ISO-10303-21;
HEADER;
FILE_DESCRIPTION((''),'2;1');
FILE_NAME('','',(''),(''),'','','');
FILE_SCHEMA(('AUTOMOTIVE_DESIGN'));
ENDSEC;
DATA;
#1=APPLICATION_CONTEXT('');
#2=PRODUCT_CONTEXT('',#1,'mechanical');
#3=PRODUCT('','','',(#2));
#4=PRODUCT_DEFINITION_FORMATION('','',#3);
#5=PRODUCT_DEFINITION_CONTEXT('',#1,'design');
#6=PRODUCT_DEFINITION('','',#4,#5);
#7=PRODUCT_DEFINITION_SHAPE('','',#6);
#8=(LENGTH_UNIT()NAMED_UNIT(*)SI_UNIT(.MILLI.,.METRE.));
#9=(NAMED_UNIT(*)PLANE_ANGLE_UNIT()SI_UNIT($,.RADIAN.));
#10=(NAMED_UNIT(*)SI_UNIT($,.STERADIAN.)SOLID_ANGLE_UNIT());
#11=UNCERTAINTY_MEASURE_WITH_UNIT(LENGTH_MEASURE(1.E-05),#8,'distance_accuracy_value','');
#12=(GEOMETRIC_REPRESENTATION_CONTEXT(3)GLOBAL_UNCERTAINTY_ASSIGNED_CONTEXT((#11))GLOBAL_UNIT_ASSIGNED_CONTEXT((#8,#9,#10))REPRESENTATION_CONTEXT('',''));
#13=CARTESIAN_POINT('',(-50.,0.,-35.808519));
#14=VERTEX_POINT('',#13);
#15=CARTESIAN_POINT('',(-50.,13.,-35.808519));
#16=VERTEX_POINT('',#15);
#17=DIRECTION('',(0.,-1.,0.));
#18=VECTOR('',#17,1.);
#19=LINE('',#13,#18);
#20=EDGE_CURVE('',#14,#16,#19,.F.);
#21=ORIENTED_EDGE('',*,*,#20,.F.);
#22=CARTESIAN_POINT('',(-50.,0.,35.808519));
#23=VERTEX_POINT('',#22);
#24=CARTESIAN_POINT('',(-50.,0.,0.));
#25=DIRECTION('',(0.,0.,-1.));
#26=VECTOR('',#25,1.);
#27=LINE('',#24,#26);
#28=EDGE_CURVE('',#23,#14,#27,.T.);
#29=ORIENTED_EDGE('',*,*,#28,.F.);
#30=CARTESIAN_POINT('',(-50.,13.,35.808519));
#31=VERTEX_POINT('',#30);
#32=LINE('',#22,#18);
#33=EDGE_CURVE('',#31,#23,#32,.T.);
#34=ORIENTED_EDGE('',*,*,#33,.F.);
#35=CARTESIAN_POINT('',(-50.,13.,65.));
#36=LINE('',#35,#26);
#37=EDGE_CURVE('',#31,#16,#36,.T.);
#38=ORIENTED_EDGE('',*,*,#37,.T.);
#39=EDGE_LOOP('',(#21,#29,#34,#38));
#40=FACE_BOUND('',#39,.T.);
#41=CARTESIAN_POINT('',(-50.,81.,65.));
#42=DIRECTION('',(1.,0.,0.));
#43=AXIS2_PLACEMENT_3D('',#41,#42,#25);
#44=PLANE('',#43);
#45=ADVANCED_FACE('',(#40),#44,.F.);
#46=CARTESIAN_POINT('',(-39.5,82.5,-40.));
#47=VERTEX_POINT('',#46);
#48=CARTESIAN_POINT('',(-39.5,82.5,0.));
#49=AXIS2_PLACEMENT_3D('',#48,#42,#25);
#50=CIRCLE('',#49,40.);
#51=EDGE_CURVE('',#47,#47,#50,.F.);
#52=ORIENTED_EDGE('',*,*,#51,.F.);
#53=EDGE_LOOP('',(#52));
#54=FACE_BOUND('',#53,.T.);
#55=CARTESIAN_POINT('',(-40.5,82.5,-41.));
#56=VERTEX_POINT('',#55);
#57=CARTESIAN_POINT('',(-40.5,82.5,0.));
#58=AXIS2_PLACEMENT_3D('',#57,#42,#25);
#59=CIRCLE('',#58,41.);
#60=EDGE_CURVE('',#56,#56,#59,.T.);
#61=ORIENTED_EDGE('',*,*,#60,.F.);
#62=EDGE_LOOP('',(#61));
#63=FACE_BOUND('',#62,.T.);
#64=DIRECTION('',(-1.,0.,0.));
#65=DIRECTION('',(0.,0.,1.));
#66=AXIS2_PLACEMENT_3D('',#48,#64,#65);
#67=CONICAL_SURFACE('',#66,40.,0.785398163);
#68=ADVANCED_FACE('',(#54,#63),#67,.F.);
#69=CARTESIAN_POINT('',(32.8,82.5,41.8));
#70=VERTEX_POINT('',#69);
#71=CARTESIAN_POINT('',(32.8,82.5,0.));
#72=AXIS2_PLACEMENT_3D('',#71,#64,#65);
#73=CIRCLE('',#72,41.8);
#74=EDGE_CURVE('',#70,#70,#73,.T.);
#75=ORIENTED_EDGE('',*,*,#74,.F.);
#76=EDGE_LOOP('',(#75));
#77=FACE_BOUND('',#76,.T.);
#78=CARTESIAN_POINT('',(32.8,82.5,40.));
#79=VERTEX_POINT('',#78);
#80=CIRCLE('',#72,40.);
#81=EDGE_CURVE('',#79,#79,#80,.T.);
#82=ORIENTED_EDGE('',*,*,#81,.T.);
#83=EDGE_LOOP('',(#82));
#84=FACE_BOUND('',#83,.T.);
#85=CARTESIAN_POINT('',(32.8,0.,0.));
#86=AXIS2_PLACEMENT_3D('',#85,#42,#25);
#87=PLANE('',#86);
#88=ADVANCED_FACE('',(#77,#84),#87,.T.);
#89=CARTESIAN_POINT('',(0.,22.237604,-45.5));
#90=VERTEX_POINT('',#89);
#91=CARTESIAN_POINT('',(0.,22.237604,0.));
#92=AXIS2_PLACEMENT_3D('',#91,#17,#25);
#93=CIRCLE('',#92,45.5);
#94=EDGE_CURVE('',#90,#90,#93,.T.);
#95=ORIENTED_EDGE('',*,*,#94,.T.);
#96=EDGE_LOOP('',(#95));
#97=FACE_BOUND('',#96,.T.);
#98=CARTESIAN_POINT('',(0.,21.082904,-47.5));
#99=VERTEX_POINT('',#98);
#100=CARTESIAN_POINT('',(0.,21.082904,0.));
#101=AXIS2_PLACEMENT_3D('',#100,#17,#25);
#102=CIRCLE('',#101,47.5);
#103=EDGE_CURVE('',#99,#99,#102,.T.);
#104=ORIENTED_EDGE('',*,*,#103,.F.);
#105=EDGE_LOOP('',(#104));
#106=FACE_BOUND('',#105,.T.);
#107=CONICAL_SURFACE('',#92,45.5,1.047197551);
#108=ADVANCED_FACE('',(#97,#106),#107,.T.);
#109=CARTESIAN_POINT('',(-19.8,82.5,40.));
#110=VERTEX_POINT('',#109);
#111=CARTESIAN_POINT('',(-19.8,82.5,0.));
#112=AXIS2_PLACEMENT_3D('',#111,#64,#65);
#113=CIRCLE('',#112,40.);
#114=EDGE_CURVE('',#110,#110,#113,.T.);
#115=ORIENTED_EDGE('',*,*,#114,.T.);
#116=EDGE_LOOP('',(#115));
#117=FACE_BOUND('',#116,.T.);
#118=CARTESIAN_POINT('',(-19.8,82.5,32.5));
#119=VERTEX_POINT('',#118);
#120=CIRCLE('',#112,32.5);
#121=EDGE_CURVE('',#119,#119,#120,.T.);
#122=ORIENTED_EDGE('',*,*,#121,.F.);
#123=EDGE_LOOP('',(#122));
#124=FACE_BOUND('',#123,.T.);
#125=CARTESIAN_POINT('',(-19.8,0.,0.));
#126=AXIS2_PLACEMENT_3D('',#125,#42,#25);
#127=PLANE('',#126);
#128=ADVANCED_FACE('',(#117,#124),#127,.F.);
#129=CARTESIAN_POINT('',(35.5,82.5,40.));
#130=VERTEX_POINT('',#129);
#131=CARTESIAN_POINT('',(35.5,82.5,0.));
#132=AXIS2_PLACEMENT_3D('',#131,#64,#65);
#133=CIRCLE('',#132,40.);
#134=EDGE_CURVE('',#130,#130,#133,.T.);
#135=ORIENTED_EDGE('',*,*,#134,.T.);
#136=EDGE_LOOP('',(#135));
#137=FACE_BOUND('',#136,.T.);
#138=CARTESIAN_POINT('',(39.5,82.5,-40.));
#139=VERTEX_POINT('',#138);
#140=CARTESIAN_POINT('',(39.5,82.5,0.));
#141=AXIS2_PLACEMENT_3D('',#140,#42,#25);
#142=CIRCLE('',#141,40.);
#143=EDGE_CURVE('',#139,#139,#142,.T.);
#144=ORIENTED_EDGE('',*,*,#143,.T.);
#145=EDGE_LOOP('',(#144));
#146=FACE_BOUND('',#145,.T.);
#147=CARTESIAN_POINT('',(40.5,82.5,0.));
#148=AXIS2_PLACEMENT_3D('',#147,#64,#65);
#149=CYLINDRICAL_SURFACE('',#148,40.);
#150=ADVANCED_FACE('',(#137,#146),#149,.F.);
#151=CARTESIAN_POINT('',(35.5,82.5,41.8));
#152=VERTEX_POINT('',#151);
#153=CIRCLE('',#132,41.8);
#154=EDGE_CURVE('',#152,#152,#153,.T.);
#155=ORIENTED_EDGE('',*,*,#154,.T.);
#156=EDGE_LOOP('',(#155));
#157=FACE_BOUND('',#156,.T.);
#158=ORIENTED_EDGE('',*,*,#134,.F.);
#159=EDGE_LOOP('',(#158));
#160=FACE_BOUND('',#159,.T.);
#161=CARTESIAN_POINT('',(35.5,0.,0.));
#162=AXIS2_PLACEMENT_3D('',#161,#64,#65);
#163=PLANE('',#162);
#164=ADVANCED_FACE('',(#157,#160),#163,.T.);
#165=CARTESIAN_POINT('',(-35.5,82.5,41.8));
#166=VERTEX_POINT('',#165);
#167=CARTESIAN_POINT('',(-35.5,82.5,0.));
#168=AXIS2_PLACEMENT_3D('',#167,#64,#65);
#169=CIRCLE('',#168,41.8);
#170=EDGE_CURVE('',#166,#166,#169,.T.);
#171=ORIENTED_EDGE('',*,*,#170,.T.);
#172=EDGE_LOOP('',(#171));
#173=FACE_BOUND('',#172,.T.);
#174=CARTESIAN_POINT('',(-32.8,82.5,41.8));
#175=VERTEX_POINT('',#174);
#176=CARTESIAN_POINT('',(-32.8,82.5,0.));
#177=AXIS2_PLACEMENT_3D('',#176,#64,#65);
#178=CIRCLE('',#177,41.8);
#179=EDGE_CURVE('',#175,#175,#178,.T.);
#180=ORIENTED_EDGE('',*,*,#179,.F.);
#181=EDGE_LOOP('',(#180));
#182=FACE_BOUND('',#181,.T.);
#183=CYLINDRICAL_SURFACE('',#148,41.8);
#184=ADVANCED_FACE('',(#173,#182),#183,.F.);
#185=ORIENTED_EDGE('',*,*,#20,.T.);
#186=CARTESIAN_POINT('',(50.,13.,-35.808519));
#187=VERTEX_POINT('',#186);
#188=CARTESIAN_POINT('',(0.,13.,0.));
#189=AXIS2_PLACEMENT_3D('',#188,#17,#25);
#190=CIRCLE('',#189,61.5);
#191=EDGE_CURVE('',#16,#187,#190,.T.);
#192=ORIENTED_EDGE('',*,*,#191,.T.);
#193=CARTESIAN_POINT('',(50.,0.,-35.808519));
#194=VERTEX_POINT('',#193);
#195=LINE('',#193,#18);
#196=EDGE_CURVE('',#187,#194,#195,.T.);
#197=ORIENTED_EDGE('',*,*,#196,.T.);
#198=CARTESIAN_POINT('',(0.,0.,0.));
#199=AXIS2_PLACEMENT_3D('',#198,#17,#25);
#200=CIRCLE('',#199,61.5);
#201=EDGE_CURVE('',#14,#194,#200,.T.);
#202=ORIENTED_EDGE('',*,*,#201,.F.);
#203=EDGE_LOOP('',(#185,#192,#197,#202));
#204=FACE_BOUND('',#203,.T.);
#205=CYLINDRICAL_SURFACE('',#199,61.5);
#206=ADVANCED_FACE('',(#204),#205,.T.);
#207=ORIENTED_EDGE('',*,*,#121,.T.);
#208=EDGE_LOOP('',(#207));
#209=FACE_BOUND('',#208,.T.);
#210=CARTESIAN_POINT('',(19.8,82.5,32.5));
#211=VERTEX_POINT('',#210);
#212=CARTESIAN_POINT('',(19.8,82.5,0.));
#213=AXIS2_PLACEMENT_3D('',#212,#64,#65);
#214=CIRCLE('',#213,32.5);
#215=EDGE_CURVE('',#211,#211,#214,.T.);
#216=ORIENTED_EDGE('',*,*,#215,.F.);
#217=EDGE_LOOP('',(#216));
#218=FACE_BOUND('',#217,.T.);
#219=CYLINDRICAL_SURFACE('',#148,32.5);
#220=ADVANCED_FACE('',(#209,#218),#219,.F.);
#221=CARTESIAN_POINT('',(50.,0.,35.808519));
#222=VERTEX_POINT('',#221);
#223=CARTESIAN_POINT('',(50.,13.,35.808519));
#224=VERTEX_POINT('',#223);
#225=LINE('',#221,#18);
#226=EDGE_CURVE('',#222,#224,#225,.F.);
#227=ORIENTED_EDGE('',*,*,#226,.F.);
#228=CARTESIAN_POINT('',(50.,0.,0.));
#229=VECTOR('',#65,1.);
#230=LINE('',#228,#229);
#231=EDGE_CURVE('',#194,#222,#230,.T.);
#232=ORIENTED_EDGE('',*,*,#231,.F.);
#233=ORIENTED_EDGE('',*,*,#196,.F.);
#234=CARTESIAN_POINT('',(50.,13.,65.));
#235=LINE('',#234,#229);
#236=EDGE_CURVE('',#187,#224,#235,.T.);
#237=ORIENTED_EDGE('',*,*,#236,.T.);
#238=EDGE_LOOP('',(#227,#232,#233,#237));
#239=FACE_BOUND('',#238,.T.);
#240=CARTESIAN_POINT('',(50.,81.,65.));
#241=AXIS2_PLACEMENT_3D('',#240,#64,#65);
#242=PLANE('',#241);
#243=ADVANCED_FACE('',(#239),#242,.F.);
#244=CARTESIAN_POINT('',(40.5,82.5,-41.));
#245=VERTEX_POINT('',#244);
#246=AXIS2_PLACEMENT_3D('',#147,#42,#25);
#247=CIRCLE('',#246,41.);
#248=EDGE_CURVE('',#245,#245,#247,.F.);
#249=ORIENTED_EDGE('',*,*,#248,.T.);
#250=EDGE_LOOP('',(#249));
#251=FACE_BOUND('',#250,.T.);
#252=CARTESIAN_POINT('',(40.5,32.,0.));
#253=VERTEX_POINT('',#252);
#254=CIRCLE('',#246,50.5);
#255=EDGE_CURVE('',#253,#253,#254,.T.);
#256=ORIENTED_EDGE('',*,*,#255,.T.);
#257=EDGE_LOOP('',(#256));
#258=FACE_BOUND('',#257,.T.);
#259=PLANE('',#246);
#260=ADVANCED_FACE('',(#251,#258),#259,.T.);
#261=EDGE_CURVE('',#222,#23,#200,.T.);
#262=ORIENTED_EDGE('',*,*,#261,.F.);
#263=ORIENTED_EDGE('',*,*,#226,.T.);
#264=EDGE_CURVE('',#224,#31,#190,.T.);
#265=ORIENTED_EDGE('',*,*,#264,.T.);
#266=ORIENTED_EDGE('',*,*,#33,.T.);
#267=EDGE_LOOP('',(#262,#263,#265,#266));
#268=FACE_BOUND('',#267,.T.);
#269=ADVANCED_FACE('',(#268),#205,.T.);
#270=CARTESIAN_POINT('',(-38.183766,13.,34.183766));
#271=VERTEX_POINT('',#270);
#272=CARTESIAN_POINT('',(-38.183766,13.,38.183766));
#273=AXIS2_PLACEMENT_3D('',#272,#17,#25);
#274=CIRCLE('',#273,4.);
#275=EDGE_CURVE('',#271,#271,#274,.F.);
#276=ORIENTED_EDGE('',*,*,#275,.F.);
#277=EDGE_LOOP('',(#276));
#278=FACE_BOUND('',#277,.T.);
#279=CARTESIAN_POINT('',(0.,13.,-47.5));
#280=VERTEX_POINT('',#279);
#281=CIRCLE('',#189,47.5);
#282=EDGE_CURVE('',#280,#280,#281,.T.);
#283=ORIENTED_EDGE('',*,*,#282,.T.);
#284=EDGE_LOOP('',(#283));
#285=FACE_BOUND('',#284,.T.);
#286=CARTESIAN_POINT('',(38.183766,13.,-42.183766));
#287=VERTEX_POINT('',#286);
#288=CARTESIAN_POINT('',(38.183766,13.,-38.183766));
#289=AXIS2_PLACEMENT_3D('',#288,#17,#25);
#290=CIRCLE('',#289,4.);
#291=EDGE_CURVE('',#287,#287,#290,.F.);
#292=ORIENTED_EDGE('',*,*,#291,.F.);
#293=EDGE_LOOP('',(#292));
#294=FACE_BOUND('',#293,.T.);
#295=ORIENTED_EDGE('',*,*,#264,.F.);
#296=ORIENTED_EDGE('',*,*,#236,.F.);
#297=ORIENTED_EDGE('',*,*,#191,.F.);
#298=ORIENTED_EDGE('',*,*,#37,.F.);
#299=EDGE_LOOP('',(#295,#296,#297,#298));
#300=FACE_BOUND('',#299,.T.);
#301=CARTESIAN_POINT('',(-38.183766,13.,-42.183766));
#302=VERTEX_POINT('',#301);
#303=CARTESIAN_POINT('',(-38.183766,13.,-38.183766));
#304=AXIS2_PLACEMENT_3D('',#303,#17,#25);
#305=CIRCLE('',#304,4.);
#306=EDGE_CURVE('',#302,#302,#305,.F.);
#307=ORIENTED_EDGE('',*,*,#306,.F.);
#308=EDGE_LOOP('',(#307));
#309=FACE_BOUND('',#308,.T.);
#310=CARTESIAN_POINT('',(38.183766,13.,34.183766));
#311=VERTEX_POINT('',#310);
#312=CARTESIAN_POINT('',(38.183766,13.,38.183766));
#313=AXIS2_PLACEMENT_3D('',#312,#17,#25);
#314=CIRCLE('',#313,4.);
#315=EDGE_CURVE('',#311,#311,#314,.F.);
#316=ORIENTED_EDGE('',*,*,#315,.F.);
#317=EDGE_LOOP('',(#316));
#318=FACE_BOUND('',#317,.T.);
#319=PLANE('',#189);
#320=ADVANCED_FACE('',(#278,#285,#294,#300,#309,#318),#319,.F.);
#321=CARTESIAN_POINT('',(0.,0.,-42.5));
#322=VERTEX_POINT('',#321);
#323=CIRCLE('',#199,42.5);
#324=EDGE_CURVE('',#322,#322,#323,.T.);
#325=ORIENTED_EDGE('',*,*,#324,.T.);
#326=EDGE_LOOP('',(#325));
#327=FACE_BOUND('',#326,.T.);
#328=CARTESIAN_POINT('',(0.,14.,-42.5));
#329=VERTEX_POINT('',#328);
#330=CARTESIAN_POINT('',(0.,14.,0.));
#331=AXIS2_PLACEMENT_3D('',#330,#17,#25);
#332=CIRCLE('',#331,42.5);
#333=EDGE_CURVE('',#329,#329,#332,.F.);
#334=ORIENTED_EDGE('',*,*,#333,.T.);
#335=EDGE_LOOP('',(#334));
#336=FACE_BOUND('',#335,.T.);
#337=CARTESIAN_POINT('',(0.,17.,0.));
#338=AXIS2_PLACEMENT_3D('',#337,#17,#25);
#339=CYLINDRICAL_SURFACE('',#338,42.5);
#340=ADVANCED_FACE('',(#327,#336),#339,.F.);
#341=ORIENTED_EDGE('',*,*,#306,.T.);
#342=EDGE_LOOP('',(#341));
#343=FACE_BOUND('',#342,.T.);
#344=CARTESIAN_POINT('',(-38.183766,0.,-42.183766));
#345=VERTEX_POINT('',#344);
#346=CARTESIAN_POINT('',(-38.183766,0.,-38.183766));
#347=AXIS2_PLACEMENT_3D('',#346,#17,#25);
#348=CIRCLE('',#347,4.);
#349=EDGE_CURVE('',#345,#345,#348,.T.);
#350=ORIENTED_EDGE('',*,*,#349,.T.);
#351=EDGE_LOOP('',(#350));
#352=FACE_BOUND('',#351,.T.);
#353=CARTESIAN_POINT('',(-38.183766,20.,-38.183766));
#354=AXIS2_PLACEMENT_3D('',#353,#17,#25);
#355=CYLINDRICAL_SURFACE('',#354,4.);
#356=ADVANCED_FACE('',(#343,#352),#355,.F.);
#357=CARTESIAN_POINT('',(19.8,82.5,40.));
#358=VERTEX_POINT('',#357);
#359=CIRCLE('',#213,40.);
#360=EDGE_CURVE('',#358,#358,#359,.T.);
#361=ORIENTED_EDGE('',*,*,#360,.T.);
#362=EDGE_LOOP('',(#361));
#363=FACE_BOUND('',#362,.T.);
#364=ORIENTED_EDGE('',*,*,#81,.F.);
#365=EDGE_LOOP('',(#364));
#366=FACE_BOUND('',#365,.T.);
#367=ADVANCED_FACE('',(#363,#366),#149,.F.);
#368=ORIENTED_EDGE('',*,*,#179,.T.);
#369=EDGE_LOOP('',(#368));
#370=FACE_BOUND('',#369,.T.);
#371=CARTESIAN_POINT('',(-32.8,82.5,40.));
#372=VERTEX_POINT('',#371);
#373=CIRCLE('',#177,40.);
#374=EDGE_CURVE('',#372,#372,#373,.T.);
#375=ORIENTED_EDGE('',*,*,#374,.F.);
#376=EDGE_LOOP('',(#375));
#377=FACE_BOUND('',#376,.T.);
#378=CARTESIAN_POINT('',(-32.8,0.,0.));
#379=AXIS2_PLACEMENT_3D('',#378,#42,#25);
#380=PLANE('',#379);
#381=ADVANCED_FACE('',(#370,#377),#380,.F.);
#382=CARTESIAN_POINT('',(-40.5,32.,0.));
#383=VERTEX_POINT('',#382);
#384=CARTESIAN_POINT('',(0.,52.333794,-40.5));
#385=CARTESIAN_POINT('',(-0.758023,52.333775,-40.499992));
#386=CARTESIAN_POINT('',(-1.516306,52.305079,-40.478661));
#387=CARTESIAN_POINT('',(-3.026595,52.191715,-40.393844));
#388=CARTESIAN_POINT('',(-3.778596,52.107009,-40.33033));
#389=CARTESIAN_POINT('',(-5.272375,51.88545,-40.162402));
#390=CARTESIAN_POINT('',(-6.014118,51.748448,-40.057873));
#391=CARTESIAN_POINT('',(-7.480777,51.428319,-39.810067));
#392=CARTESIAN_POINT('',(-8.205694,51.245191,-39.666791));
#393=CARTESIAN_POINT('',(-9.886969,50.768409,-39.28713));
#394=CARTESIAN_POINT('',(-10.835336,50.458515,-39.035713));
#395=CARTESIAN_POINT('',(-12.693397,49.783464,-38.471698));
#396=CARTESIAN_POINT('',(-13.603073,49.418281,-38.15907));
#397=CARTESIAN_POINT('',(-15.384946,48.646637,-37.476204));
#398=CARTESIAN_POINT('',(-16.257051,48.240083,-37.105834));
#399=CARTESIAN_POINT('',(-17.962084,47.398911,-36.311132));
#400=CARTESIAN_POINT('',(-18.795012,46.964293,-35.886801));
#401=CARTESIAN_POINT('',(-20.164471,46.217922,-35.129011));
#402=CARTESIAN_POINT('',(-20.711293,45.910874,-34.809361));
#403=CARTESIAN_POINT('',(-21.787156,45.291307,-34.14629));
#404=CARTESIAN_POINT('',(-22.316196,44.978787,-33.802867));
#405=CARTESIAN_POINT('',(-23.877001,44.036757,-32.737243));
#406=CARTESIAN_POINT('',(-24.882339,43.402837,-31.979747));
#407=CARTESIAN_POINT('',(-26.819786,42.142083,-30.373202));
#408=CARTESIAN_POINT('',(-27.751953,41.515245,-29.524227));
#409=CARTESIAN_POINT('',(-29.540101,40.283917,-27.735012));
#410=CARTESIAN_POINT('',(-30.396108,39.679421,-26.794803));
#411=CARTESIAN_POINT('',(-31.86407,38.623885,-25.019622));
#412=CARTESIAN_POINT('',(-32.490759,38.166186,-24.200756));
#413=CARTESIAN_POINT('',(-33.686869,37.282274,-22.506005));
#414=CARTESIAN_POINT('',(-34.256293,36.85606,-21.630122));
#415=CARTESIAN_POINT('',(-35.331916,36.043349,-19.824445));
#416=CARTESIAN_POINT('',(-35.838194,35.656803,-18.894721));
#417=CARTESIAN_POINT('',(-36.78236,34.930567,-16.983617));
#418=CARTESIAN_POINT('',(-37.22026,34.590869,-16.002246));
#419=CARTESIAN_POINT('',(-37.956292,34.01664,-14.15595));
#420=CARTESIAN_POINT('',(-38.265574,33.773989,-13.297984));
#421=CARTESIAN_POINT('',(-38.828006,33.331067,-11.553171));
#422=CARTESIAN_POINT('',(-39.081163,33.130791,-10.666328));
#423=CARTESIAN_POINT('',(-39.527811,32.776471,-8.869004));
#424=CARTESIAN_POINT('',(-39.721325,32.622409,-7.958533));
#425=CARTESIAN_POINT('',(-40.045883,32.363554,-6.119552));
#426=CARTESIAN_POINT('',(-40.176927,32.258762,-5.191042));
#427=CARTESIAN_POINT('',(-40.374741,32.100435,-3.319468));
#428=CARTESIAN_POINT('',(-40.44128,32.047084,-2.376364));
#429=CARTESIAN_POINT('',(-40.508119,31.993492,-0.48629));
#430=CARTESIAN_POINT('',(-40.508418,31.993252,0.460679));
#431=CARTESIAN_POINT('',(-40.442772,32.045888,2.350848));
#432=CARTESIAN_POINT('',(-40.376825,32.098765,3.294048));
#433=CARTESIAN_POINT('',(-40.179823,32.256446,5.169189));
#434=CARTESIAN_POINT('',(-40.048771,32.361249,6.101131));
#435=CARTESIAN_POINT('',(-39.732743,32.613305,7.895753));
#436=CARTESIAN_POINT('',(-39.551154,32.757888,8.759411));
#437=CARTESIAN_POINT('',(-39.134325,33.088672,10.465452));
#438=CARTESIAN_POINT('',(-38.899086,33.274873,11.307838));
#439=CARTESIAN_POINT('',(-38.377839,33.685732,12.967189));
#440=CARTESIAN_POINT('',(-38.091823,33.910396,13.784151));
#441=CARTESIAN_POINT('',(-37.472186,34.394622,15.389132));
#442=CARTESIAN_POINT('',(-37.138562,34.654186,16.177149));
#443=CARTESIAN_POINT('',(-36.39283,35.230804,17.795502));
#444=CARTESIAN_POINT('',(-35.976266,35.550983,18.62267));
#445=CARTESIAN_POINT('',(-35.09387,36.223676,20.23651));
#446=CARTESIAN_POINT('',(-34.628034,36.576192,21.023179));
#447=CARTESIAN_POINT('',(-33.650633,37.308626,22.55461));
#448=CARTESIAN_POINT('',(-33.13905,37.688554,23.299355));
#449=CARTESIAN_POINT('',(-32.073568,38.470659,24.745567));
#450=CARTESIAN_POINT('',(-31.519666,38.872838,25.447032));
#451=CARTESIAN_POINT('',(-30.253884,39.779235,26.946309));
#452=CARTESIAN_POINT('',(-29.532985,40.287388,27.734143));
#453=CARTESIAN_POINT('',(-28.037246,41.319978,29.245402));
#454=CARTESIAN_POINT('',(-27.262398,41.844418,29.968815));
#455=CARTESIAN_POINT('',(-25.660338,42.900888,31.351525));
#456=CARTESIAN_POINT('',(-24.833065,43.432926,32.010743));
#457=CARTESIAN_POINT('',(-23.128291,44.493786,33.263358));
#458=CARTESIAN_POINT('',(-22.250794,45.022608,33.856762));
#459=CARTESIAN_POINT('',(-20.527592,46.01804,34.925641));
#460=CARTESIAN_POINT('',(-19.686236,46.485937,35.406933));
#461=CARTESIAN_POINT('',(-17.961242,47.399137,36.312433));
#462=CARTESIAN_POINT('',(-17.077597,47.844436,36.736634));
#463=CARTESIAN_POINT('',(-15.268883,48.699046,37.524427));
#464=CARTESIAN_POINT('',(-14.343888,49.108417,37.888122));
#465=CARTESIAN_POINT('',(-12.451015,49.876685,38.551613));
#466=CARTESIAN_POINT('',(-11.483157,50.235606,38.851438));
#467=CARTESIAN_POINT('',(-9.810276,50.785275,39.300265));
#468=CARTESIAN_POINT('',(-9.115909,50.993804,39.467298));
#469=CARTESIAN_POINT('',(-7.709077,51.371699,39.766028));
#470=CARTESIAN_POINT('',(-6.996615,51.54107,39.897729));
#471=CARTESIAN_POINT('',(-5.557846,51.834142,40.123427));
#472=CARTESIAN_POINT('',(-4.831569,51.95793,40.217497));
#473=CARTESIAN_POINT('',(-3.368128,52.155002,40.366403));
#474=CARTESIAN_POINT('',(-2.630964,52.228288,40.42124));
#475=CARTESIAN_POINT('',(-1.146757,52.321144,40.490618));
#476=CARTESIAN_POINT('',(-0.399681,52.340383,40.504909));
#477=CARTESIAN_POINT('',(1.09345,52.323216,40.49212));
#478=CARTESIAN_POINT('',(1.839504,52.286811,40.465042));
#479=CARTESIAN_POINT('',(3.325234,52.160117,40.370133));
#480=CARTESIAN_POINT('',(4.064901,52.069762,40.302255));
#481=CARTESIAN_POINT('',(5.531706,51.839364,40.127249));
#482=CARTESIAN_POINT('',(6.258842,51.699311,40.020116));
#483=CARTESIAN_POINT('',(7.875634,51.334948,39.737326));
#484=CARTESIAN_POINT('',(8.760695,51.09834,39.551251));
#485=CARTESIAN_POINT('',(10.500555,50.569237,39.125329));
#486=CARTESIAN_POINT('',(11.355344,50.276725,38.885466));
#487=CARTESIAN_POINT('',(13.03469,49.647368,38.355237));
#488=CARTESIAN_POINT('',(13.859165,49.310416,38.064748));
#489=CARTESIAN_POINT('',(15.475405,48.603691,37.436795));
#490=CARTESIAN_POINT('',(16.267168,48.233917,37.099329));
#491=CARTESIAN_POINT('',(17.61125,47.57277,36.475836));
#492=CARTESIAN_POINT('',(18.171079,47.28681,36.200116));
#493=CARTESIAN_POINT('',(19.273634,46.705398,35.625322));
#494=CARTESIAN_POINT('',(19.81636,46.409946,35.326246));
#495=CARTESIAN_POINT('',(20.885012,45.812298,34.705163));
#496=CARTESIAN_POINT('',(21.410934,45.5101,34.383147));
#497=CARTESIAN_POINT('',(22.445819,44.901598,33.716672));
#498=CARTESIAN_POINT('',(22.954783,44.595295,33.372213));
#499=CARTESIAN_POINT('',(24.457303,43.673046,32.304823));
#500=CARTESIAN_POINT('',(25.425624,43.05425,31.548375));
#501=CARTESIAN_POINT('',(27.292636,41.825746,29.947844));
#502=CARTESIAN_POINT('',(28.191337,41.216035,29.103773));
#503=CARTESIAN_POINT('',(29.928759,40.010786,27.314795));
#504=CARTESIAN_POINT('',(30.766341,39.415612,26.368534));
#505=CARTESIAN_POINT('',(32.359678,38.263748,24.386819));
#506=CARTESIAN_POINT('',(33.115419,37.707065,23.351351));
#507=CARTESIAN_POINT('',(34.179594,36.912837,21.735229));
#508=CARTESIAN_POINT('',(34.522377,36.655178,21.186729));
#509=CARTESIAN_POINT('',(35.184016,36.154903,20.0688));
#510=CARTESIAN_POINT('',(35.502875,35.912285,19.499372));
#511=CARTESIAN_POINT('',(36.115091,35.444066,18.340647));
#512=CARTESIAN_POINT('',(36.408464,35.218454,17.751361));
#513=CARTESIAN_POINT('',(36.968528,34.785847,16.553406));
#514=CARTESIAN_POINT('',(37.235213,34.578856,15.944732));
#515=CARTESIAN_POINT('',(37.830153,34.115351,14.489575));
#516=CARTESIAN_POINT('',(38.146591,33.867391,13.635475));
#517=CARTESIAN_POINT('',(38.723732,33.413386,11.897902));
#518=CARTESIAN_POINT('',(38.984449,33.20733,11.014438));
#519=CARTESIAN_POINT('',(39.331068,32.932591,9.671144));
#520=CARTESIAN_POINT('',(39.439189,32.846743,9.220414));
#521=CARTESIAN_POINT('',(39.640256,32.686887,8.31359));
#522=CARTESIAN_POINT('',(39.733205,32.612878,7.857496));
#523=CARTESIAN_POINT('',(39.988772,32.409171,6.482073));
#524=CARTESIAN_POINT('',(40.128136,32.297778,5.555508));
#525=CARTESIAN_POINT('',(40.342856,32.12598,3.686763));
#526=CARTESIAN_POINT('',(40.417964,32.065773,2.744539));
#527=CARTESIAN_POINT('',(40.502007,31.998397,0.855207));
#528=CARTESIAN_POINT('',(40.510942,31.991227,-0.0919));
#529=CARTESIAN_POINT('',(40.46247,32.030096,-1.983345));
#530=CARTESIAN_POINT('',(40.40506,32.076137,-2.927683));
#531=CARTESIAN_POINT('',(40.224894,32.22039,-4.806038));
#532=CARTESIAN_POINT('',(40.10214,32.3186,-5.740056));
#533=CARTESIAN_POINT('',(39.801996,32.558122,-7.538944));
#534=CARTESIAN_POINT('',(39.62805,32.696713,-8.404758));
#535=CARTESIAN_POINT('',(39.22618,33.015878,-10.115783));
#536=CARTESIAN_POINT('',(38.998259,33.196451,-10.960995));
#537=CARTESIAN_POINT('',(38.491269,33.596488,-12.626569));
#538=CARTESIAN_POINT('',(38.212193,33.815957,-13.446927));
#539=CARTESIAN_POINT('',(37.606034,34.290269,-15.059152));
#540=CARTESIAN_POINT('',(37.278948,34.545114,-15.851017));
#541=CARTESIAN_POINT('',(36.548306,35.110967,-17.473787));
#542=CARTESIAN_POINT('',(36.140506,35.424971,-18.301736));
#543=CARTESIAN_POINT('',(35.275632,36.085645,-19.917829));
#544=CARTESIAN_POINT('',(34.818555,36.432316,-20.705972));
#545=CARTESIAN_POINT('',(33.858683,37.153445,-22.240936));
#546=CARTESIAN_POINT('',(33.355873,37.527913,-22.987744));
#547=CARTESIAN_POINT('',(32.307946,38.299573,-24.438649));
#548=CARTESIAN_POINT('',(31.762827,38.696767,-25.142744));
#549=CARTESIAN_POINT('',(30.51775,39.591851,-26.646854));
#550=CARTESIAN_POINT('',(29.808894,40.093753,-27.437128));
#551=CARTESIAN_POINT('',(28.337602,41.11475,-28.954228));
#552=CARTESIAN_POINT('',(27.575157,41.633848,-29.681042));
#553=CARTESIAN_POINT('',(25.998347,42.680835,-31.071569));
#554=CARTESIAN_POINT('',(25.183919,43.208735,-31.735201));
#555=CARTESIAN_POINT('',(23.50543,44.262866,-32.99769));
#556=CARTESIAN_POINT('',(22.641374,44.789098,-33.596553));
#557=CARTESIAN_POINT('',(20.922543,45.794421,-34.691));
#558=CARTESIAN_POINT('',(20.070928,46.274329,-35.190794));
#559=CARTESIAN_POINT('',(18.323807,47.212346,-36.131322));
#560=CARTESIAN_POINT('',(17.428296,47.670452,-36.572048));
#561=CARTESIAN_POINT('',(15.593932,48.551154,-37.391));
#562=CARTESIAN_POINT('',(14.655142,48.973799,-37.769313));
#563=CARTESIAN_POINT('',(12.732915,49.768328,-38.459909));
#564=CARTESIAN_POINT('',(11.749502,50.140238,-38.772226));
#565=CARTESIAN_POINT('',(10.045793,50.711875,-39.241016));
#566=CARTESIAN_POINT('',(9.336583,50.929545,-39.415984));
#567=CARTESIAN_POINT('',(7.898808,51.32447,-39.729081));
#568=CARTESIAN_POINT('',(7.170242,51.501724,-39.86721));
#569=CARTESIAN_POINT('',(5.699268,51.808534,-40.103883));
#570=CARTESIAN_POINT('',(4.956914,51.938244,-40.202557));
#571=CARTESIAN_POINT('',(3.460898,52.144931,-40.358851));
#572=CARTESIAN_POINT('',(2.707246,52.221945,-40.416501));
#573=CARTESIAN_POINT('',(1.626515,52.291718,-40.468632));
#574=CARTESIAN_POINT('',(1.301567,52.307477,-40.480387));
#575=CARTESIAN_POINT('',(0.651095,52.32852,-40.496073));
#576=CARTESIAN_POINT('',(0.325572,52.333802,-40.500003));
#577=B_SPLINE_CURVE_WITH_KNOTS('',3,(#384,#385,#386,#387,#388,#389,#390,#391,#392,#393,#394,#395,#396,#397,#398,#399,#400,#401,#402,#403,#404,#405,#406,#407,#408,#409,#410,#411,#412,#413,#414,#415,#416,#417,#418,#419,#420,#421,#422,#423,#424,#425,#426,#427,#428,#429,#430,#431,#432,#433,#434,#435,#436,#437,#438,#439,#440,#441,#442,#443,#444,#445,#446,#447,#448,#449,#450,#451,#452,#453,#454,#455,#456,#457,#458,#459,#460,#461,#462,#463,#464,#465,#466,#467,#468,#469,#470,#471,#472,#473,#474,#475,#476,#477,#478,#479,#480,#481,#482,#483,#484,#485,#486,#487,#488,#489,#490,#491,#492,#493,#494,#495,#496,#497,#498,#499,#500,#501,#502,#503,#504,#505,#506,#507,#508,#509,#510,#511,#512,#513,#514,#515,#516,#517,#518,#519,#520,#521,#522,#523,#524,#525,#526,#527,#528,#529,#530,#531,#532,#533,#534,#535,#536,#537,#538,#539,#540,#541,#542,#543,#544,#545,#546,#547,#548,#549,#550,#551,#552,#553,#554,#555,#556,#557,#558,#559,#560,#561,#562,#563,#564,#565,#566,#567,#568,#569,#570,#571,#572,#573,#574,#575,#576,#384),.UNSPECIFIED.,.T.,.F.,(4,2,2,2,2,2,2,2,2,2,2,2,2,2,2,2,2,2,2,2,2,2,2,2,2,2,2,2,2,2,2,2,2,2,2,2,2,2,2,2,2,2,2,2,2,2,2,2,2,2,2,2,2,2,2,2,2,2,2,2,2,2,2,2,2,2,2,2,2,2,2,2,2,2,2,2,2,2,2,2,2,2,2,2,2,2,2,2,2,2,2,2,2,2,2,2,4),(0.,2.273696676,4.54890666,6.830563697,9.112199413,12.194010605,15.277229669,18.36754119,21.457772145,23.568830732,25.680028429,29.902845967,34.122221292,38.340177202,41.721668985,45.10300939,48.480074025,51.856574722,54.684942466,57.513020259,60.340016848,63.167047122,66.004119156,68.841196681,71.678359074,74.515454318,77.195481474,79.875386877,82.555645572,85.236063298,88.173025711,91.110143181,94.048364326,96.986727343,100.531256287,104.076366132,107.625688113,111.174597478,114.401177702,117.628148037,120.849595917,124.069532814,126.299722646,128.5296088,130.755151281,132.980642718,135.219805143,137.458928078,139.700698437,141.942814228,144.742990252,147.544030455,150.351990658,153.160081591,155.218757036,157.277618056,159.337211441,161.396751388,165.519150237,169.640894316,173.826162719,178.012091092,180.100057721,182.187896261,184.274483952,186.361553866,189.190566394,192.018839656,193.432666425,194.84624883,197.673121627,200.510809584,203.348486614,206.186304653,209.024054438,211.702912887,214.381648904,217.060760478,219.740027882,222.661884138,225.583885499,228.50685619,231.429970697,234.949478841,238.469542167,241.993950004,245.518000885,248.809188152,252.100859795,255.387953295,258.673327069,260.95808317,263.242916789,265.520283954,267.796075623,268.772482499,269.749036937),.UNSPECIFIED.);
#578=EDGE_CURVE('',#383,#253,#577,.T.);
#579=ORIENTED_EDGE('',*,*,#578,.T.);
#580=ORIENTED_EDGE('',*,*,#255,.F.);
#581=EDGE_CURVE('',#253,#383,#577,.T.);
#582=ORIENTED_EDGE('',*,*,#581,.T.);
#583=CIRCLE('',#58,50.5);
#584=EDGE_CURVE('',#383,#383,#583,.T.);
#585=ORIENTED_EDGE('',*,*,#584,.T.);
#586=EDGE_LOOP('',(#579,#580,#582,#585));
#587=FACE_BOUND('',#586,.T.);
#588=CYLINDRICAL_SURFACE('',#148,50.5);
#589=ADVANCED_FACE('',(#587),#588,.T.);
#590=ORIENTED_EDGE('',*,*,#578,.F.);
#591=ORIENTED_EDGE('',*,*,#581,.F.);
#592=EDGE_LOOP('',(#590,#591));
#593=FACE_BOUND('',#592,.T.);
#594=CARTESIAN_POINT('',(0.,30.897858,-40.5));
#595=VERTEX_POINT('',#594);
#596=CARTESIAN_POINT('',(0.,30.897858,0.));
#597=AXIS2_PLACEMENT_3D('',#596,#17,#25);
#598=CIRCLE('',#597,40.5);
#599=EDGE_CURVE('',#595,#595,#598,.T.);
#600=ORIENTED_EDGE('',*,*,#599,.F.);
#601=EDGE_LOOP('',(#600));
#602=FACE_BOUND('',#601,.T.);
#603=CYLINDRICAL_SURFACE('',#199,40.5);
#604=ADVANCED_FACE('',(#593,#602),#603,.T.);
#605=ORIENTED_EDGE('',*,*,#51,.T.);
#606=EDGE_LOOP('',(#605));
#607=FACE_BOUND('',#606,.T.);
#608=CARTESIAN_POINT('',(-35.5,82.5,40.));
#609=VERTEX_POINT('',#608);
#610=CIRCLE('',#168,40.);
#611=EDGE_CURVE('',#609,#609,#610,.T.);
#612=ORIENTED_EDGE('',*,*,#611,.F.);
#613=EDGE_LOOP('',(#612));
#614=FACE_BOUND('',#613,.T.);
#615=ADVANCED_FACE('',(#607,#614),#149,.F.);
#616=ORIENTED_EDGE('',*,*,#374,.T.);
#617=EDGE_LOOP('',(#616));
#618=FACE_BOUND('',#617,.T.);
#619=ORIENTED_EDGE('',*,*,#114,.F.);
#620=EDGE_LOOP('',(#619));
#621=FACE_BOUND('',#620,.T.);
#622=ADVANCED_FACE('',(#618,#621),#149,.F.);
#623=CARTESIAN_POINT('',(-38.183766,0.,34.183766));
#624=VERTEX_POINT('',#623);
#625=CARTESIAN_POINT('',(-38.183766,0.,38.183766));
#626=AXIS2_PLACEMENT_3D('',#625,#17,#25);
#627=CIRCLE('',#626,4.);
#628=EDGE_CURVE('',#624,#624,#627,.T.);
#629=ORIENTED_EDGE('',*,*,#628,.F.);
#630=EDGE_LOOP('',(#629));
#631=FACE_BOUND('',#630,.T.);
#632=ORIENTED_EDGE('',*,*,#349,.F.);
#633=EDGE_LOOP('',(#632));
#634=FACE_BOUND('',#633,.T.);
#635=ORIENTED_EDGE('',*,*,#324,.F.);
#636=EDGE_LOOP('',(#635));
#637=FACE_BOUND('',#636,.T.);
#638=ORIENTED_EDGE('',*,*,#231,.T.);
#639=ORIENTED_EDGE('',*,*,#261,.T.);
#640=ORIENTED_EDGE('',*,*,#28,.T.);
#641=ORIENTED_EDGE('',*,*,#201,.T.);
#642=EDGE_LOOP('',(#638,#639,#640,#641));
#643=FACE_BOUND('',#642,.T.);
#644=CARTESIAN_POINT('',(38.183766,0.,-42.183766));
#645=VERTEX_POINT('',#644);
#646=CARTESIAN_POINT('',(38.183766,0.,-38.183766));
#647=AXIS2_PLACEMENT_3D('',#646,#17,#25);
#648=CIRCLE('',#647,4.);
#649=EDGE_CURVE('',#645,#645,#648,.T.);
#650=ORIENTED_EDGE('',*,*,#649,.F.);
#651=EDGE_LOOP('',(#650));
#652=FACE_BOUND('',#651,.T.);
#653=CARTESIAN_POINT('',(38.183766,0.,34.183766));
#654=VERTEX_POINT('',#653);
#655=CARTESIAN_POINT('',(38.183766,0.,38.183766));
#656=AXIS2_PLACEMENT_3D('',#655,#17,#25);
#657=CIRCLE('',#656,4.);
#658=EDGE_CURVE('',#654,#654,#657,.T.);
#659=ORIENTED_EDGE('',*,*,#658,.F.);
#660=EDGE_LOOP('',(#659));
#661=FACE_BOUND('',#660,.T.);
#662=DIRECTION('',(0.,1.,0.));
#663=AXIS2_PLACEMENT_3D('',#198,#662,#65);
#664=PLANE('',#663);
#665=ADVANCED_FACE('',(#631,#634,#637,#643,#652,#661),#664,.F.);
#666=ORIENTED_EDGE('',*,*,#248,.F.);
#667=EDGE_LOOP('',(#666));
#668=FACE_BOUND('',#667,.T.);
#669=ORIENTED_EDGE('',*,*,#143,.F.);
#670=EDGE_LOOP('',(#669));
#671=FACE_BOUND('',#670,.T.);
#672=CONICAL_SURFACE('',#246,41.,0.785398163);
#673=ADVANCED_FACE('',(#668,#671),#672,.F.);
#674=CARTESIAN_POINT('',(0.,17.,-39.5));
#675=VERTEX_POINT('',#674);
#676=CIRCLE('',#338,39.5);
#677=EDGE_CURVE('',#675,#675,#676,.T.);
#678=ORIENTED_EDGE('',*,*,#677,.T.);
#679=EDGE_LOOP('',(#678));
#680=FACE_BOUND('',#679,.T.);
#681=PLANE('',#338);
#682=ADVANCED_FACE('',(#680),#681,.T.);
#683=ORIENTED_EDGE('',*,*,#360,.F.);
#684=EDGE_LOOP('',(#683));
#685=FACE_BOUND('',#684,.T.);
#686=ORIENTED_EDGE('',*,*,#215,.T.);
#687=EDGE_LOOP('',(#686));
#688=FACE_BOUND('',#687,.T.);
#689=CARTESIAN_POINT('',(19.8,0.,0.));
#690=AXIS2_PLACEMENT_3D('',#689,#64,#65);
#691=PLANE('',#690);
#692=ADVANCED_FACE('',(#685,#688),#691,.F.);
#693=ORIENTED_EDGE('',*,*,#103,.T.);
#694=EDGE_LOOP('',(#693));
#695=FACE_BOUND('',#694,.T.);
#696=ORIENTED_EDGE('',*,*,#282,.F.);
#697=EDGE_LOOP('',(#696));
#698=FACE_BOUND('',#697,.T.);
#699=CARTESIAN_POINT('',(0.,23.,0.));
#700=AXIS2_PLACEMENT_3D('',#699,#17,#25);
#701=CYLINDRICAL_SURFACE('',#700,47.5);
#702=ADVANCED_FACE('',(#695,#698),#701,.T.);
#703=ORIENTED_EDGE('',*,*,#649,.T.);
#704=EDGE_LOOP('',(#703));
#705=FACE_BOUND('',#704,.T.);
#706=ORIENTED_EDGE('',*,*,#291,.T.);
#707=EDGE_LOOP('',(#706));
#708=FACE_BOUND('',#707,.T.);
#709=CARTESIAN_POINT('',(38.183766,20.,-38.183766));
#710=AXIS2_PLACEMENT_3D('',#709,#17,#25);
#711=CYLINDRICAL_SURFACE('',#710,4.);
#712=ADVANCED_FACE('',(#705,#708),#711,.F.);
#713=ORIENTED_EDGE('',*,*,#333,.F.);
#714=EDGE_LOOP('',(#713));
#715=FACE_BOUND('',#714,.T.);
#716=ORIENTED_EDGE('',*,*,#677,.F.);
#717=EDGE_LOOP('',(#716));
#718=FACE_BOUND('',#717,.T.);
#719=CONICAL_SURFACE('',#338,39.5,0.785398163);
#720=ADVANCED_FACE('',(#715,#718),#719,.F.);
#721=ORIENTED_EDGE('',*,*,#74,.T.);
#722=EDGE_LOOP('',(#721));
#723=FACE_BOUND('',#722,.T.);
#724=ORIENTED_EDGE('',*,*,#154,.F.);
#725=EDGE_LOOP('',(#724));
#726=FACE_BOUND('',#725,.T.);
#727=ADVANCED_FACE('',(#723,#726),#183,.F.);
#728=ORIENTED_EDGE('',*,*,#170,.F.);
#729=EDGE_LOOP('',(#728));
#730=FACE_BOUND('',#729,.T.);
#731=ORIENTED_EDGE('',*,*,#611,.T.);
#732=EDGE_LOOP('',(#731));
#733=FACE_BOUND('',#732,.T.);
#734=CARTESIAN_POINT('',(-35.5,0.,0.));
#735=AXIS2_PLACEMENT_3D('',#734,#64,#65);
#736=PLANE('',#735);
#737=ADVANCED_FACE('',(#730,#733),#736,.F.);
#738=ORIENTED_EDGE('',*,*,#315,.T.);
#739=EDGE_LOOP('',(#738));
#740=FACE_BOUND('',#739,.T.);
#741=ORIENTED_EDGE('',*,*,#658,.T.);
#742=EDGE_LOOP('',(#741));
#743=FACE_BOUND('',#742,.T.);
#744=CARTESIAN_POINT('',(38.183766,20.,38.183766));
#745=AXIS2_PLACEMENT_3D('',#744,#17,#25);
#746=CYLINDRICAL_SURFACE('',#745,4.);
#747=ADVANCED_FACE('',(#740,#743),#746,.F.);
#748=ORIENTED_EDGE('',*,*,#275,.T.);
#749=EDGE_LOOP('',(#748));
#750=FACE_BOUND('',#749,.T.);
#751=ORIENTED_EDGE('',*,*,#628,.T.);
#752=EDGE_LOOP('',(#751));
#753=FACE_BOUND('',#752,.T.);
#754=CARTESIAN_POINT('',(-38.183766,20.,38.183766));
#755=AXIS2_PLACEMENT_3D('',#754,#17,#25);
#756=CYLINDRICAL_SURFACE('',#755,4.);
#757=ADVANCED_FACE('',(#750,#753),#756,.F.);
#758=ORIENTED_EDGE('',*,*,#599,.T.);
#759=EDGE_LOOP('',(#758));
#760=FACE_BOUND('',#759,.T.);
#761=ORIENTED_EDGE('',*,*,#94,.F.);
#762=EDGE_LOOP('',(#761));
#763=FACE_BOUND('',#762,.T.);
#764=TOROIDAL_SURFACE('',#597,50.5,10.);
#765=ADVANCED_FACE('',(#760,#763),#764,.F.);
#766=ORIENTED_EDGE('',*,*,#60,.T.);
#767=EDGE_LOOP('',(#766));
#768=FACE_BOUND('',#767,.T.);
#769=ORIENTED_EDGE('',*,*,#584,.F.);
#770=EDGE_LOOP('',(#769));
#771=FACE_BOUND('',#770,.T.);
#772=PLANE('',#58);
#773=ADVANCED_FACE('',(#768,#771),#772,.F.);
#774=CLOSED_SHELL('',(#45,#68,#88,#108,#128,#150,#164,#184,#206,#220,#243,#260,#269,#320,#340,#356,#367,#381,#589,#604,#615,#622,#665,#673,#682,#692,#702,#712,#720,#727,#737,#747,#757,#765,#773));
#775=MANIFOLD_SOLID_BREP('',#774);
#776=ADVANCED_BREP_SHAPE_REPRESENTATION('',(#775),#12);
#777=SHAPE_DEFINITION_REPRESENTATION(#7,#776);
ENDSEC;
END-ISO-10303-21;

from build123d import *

# Parameters (mm, degrees)
SKETCH3_R           = 50.5
BOSS_EXTRUDE1_DEPTH = 40.5
SKETCH5_W           = 20
SKETCH5_H           = 130
CUT_EXTRUDE1_DEPTH  = 81
SKETCH9_R           = 4
CUT_EXTRUDE4_DEPTH  = 20
SKETCH10_R          = 42.5
CUT_EXTRUDE5_DEPTH  = 17
CHAMFER1_SIZE       = 1
CHAMFER2_SIZE       = 3
CUT_EXTRUDE8_START  = -13
SKETCH13_OUTSIDE_W  = 143.386
SKETCH13_OUTSIDE_H  = 166.386
SKETCH13_OUTSIDE_R  = 47.5
CUT_EXTRUDE8_DEPTH  = 10


with BuildPart() as part:
    # Sketch1 → Revolve1 (revolve)
    with BuildSketch(Plane.XY, mode=Mode.PRIVATE) as revolve1_sk:
        with BuildLine():
            Line((0, 0), (-61.5, 0))
            Line((-61.5, 0), (-61.5, 13))
            Line((-61.5, 13), (-45.5, 22.237604307))
            ThreePointArc((-45.5, 22.237604307), (-41.839745962, 25.897858345), (-40.5, 30.897858345))
            Line((-40.5, 30.897858345), (-40.5, 80))
            Line((-40.5, 80), (0, 80))
            Line((0, 80), (0, 0))
        make_face()
    revolve(revolve1_sk.sketch.rotate(Axis((0, 0, 0), (0, 1, 0)), 270), axis=Axis((0, 0, 0), (0, 1, 0)))

    # Sketch3 → Boss-Extrude1 (add, symmetric)
    with BuildSketch(Plane(origin=(0, 0, 0), x_dir=(0, 0, -1), z_dir=(1, 0, 0))):
        with Locations((0, 82.5)):
            Circle(SKETCH3_R)
    extrude(amount=BOSS_EXTRUDE1_DEPTH, both=True)

    # Sketch5 → Cut-Extrude1 (cut)
    with BuildSketch(Plane.XZ):
        with Locations((60, 0)):
            Rectangle(SKETCH5_W, SKETCH5_H)
        with Locations((-60, 0)):
            Rectangle(SKETCH5_W, SKETCH5_H)
    extrude(amount=-CUT_EXTRUDE1_DEPTH, mode=Mode.SUBTRACT)

    # Sketch6 → Cut-Revolve1 (revolve, cut)
    with BuildSketch(Plane.XY, mode=Mode.PRIVATE) as cut_revolve1_sk:
        Polygon((-35.5, 122.5), (-40.5, 122.5), (-40.5, 82.5), (40.5, 82.5), (40.5, 122.5), (35.5, 122.5), (35.5, 124.3), (32.8, 124.3), (32.8, 122.5), (19.8, 122.5), (19.8, 115), (-19.8, 115), (-19.8, 122.5), (-32.8, 122.5), (-32.8, 124.3), (-35.5, 124.3), align=None)
    revolve(cut_revolve1_sk.sketch.rotate(Axis((40.5, 82.5, 0), (1, 0, 0)), 90), axis=Axis((40.5, 82.5, 0), (1, 0, 0)), mode=Mode.SUBTRACT)

    # Sketch9 → Cut-Extrude4 (cut)
    with BuildSketch(Plane.XZ):
        with Locations(Location((38.183766184, 38.183766184, 0), (0, 0, 270))):
            Circle(SKETCH9_R)
        with Locations(Location((-38.183766184, 38.183766184, 0), (0, 0, 270))):
            Circle(SKETCH9_R)
        with Locations(Location((-38.183766184, -38.183766184, 0), (0, 0, 270))):
            Circle(SKETCH9_R)
        with Locations(Location((38.183766184, -38.183766184, 0), (0, 0, 270))):
            Circle(SKETCH9_R)
    extrude(amount=-CUT_EXTRUDE4_DEPTH, mode=Mode.SUBTRACT)

    # Sketch10 → Cut-Extrude5 (cut)
    with BuildSketch(Plane.XZ):
        with Locations(Location((0, 0, 0), (0, 0, 270))):
            Circle(SKETCH10_R)
    extrude(amount=-CUT_EXTRUDE5_DEPTH, mode=Mode.SUBTRACT)

    # Chamfer1
    # the kernel refuses this chamfer: 1 mm, written as the material it takes off along each edge
    with BuildSketch(Plane(origin=(-40.5, 82.5, 0), x_dir=(0, -1, 0), z_dir=(0, 0, 1))) as chamfer1_piece_1:
        Polygon((40 + CHAMFER1_SIZE, 0), (40, CHAMFER1_SIZE), (40, 0), align=None)
    revolve(axis=Axis((-40.5, 82.5, 0), (1, 0, 0)), revolution_arc=270, mode=Mode.SUBTRACT)
    with BuildSketch(Plane(origin=(40.5, 82.5, 0), x_dir=(0, -1, 0), z_dir=(0, 0, 1))) as chamfer1_piece_2:
        Polygon((40 + CHAMFER1_SIZE, 0), (40, -CHAMFER1_SIZE), (40, 0), align=None)
    revolve(axis=Axis((40.5, 82.5, 0), (1, 0, 0)), revolution_arc=270, mode=Mode.SUBTRACT)
    with BuildSketch(Plane(origin=(40.5, 82.5, 0), x_dir=(0, 0, 1), z_dir=(0, 1, 0))) as chamfer1_piece_3:
        Polygon((40 + CHAMFER1_SIZE, 0), (40, -CHAMFER1_SIZE), (40, 0), align=None)
    revolve(axis=Axis((40.5, 82.5, 0), (1, 0, 0)), revolution_arc=90, mode=Mode.SUBTRACT)
    with BuildSketch(Plane(origin=(-40.5, 82.5, 0), x_dir=(0, 0, 1), z_dir=(0, 1, 0))) as chamfer1_piece_4:
        Polygon((40 + CHAMFER1_SIZE, 0), (40, CHAMFER1_SIZE), (40, 0), align=None)
    revolve(axis=Axis((-40.5, 82.5, 0), (1, 0, 0)), revolution_arc=90, mode=Mode.SUBTRACT)

    # Chamfer2
    chamfer2_edges = [part.edges().sort_by_distance(p)[0] for p in [
        (0, 17, 42.5),
    ]]
    chamfer(chamfer2_edges, length=CHAMFER2_SIZE)

    # Sketch13 outside → Cut-Extrude8 (cut)
    with BuildSketch(Plane.XZ.offset(CUT_EXTRUDE8_START)):
        Rectangle(SKETCH13_OUTSIDE_W, SKETCH13_OUTSIDE_H)
        with Locations(Location((0, 0, 0), (0, 0, 270))):
            Circle(SKETCH13_OUTSIDE_R, mode=Mode.SUBTRACT)
    extrude(amount=-CUT_EXTRUDE8_DEPTH, mode=Mode.SUBTRACT)


solid = part.part
